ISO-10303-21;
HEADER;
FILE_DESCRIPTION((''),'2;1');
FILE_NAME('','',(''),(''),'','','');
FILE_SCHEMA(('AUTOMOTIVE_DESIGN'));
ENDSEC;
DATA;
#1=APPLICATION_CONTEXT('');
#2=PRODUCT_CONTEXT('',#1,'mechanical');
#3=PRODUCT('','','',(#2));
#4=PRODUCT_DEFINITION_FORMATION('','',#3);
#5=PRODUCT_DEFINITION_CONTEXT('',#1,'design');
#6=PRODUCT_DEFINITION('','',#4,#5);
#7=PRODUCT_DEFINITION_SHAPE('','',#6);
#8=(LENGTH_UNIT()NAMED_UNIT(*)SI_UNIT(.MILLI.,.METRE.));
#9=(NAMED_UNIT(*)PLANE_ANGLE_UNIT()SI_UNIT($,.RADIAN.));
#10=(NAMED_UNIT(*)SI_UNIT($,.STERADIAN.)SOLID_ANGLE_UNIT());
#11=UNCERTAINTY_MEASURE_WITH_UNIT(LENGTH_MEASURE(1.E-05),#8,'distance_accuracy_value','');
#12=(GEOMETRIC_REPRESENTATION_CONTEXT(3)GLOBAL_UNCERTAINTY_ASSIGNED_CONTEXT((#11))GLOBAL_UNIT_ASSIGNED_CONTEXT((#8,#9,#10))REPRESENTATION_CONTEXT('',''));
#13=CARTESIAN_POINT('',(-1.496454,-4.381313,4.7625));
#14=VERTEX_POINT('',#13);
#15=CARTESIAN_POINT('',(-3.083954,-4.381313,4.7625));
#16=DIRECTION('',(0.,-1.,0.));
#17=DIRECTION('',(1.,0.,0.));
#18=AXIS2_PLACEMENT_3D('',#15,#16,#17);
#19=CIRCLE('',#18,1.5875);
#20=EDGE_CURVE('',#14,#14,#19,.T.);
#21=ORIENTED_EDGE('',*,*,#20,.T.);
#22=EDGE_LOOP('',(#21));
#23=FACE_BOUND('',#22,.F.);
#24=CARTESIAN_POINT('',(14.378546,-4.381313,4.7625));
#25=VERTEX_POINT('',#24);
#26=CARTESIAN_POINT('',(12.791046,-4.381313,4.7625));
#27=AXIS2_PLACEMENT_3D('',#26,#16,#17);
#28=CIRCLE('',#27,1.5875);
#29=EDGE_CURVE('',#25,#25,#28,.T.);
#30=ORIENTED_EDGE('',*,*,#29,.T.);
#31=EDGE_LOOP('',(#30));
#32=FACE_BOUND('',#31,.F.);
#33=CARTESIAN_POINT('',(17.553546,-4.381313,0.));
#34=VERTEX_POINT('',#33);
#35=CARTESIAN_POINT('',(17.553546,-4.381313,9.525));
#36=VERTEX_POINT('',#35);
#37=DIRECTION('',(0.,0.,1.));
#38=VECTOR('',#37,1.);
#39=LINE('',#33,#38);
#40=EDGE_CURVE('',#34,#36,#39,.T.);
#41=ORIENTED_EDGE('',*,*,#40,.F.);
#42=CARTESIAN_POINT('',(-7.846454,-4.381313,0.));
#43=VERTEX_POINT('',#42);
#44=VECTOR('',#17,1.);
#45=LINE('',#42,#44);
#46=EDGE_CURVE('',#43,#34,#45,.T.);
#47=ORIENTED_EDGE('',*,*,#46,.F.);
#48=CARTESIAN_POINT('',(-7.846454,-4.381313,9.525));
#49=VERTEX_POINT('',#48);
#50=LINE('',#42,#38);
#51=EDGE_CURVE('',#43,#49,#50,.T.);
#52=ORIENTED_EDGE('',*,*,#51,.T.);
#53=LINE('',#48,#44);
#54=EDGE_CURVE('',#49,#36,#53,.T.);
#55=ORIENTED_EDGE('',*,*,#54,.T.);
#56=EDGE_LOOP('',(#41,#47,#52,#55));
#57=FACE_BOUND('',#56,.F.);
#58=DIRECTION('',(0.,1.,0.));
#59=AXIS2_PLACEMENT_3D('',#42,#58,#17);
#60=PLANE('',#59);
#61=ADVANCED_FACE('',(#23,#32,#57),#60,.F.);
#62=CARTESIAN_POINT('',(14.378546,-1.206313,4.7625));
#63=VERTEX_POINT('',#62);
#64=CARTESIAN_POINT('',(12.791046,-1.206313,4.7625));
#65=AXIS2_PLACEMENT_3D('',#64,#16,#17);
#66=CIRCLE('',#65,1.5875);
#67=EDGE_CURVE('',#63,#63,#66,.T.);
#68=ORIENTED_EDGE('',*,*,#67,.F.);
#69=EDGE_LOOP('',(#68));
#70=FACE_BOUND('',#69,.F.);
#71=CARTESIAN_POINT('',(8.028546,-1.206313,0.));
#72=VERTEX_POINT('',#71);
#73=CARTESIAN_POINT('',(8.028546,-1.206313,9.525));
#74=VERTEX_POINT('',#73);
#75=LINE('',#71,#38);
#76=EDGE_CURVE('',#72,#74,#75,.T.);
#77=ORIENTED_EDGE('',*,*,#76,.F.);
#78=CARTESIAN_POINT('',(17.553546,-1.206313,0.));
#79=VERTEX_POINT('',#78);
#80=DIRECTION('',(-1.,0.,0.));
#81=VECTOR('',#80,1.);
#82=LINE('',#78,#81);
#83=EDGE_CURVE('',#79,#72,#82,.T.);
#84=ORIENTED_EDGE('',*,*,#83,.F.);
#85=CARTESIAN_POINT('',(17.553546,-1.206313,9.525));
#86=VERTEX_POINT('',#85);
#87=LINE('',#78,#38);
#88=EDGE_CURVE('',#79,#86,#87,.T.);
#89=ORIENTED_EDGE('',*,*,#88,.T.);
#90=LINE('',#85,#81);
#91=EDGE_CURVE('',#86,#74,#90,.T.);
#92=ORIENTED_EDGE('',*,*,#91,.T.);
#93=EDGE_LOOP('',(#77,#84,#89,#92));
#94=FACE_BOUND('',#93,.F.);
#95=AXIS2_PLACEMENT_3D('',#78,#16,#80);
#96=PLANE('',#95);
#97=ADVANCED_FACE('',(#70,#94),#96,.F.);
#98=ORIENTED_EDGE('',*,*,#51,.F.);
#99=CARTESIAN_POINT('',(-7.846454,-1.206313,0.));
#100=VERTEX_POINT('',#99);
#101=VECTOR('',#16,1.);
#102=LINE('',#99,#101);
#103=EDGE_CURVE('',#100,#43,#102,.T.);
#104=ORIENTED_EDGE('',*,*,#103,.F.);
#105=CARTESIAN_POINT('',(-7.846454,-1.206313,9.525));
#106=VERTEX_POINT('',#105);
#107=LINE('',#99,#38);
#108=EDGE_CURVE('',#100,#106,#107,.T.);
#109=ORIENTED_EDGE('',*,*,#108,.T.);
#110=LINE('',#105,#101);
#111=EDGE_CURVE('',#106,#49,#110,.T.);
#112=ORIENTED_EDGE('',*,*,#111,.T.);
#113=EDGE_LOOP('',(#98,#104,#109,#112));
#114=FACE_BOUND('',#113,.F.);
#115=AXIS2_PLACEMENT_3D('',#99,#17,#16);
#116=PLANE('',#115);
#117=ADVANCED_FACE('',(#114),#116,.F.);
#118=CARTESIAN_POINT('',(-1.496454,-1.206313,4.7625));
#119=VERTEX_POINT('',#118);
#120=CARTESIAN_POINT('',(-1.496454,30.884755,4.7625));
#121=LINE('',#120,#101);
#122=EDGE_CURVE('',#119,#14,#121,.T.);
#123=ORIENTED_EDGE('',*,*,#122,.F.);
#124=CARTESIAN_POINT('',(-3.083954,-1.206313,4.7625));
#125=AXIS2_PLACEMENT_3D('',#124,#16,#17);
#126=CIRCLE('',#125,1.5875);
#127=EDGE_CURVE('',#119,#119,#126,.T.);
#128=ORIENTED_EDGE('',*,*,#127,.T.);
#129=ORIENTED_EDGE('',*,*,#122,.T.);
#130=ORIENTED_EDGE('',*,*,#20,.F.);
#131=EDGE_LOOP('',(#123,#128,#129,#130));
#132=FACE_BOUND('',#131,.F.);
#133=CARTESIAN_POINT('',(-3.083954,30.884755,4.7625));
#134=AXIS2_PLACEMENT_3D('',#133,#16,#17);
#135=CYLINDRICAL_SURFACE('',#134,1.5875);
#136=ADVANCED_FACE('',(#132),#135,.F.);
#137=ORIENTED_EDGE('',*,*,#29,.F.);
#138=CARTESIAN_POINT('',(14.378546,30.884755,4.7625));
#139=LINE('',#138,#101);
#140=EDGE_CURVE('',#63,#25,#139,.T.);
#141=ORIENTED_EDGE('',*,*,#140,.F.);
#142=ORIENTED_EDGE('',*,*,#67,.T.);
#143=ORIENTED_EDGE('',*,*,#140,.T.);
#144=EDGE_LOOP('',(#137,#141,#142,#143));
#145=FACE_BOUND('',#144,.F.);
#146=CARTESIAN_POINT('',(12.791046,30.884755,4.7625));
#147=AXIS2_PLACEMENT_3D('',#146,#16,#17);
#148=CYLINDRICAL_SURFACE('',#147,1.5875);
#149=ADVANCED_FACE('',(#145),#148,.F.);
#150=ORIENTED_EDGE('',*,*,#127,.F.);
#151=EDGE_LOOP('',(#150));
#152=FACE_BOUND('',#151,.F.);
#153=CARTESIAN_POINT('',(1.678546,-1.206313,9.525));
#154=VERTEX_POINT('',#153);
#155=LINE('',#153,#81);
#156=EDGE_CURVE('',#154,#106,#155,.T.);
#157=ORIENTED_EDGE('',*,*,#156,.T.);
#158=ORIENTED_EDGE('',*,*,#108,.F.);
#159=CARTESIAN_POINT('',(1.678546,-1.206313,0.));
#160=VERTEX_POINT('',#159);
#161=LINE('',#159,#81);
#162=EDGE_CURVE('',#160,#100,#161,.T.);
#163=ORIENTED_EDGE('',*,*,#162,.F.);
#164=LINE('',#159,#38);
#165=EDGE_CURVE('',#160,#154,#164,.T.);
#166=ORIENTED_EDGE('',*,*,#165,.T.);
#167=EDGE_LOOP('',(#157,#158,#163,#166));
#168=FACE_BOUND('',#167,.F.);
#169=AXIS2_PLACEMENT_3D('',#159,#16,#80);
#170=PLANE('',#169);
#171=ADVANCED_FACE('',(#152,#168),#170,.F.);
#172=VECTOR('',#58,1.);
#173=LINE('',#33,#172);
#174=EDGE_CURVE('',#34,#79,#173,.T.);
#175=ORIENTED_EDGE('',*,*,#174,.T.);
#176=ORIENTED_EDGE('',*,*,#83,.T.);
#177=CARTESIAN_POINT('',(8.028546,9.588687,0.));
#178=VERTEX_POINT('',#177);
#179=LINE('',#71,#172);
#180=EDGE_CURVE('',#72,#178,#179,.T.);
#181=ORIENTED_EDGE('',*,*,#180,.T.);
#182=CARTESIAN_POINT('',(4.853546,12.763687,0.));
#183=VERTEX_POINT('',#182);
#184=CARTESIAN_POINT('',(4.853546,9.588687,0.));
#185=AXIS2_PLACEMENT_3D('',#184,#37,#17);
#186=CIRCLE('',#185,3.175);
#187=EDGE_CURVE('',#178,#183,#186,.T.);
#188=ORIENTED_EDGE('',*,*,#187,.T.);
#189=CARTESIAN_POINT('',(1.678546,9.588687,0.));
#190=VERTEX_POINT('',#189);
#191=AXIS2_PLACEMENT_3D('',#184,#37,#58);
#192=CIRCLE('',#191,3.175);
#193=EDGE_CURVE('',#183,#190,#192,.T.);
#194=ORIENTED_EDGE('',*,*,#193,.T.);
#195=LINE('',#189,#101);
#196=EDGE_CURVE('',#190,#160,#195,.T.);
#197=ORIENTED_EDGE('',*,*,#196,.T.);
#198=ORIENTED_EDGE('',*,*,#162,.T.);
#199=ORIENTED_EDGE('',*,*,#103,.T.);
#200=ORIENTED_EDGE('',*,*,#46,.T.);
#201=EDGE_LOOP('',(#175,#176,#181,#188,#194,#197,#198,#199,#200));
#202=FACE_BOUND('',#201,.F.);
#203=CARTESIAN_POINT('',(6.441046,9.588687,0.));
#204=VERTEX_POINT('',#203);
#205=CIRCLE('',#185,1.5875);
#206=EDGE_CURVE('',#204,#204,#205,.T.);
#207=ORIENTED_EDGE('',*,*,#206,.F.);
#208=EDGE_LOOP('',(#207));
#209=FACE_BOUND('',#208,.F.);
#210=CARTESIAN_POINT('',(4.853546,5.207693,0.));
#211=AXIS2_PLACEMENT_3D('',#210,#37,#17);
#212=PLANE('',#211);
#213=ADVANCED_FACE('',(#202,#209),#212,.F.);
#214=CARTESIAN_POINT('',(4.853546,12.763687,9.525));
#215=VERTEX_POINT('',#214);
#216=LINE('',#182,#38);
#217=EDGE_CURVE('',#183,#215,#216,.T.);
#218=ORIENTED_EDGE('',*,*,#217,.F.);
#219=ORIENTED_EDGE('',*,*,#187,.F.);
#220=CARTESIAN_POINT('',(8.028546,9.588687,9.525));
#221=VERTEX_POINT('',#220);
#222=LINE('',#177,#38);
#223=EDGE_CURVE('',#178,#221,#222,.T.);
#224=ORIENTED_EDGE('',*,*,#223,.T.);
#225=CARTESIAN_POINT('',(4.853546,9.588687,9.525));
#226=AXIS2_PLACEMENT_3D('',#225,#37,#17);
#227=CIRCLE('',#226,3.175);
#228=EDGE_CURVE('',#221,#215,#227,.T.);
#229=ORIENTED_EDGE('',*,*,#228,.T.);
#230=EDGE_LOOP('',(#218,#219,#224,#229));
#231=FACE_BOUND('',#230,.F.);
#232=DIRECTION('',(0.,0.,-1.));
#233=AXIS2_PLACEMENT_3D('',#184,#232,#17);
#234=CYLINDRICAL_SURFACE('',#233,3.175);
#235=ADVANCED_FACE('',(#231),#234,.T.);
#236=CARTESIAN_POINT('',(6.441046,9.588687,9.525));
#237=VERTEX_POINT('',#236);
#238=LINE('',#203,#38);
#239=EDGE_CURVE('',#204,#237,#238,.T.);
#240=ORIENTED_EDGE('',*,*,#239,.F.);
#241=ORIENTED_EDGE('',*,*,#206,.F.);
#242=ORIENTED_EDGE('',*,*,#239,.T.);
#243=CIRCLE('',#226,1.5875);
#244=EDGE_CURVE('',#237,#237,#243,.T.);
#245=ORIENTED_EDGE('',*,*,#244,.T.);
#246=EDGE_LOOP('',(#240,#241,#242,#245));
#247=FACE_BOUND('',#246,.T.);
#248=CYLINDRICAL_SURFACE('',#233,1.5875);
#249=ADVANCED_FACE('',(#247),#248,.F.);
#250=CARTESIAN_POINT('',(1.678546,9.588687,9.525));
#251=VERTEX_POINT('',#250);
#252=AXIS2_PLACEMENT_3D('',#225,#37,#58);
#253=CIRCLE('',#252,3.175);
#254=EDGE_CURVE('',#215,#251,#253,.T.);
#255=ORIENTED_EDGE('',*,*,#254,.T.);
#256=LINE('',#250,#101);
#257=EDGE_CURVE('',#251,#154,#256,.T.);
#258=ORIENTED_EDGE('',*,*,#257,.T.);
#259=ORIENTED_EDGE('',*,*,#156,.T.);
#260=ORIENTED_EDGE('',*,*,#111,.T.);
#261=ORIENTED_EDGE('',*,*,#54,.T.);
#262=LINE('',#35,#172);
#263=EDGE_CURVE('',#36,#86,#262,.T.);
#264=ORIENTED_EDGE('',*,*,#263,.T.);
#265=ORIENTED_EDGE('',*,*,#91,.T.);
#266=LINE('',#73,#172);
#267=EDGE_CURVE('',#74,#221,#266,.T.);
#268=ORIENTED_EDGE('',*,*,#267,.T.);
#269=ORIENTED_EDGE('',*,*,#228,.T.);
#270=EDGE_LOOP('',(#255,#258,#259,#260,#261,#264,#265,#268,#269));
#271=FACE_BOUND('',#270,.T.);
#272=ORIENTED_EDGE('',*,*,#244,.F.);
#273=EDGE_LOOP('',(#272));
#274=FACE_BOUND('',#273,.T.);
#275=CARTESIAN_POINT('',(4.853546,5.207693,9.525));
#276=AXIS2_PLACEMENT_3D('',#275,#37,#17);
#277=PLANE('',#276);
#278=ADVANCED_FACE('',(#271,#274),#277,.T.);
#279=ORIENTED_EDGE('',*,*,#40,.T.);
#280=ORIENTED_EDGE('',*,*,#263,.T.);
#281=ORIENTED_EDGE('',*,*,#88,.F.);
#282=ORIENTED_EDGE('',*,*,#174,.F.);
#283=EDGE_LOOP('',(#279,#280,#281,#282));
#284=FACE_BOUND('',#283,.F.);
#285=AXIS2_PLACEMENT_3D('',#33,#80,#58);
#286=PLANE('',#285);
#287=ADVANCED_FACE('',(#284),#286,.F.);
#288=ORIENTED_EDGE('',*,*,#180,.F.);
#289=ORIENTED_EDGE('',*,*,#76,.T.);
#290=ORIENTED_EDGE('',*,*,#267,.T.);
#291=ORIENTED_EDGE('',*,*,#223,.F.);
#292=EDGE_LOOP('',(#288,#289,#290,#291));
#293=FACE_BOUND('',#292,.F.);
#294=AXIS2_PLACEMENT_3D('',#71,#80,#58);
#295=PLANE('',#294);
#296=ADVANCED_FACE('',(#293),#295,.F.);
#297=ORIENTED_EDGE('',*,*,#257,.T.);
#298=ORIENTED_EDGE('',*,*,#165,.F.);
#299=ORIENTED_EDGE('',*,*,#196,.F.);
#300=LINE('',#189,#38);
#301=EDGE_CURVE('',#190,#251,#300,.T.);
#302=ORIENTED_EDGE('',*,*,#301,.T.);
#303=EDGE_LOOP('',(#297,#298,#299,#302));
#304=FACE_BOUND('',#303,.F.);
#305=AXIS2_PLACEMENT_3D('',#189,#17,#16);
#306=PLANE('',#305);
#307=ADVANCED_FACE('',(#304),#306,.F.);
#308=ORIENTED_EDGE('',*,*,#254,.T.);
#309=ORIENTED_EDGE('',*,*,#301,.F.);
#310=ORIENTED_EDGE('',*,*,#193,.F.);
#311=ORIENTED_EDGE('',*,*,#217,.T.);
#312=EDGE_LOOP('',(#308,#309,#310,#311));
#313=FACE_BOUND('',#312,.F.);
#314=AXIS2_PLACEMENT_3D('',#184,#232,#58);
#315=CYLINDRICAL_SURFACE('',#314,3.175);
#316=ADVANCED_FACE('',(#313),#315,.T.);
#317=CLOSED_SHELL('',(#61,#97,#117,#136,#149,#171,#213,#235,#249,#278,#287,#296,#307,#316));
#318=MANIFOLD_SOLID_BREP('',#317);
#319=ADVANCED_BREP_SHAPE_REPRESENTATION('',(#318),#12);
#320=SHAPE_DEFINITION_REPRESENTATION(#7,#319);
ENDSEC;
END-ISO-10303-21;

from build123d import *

# Parameters (mm, degrees)
F0_R     = 1.5875
F1_DEPTH = 9.525
F3_D     = 3.175
F5_D     = 3.175


# Not quite as in the source:
# - a length typed as a fraction of an inch, garbled in the dataset ("3 / 203.2 mm" for 3/8 in), is restored


with BuildPart() as f1:
    # F0 (on Top) → F1 (new body)
    with BuildSketch(Plane.XY):
        with BuildLine():
            Line((1.6785456881, 9.5886874095), (1.6785456881, -1.2063125905))
            Line((1.6785456881, -1.2063125905), (8.0285456881, -1.2063125905))
            Line((8.0285456881, -1.2063125905), (8.0285456881, 9.5886874095))
            ThreePointArc((8.0285456881, 9.5886874095), (7.0986097184, 11.8337514397), (4.8535456881, 12.7636874095))
            ThreePointArc((4.8535456881, 12.7636874095), (2.6084816578, 11.8337514397), (1.6785456881, 9.5886874095))
        make_face()
        with Locations((4.8535456881, 9.5886874095)):
            Circle(F0_R, mode=Mode.SUBTRACT)
        Polygon((-7.8464543119, -1.2063125905), (-7.8464543119, -4.3813125905), (17.5535456881, -4.3813125905), (17.5535456881, -1.2063125905), (8.0285456881, -1.2063125905), (1.6785456881, -1.2063125905), align=None)
    extrude(amount=F1_DEPTH)

    # F3 (through all)
    with Locations(Plane(origin=(0, -1.2063125905, 0), x_dir=(-1, 0, 0), z_dir=(0, 1, 0))):
        with Locations((-12.7910456881, 4.7625)):
            Hole(F3_D / 2)

    # F5 (through all)
    with Locations(Plane(origin=(0, -1.2063125905, 0), x_dir=(-1, 0, 0), z_dir=(0, 1, 0))):
        with Locations((3.0839543119, 4.7625)):
            Hole(F5_D / 2)


solid = f1.part
